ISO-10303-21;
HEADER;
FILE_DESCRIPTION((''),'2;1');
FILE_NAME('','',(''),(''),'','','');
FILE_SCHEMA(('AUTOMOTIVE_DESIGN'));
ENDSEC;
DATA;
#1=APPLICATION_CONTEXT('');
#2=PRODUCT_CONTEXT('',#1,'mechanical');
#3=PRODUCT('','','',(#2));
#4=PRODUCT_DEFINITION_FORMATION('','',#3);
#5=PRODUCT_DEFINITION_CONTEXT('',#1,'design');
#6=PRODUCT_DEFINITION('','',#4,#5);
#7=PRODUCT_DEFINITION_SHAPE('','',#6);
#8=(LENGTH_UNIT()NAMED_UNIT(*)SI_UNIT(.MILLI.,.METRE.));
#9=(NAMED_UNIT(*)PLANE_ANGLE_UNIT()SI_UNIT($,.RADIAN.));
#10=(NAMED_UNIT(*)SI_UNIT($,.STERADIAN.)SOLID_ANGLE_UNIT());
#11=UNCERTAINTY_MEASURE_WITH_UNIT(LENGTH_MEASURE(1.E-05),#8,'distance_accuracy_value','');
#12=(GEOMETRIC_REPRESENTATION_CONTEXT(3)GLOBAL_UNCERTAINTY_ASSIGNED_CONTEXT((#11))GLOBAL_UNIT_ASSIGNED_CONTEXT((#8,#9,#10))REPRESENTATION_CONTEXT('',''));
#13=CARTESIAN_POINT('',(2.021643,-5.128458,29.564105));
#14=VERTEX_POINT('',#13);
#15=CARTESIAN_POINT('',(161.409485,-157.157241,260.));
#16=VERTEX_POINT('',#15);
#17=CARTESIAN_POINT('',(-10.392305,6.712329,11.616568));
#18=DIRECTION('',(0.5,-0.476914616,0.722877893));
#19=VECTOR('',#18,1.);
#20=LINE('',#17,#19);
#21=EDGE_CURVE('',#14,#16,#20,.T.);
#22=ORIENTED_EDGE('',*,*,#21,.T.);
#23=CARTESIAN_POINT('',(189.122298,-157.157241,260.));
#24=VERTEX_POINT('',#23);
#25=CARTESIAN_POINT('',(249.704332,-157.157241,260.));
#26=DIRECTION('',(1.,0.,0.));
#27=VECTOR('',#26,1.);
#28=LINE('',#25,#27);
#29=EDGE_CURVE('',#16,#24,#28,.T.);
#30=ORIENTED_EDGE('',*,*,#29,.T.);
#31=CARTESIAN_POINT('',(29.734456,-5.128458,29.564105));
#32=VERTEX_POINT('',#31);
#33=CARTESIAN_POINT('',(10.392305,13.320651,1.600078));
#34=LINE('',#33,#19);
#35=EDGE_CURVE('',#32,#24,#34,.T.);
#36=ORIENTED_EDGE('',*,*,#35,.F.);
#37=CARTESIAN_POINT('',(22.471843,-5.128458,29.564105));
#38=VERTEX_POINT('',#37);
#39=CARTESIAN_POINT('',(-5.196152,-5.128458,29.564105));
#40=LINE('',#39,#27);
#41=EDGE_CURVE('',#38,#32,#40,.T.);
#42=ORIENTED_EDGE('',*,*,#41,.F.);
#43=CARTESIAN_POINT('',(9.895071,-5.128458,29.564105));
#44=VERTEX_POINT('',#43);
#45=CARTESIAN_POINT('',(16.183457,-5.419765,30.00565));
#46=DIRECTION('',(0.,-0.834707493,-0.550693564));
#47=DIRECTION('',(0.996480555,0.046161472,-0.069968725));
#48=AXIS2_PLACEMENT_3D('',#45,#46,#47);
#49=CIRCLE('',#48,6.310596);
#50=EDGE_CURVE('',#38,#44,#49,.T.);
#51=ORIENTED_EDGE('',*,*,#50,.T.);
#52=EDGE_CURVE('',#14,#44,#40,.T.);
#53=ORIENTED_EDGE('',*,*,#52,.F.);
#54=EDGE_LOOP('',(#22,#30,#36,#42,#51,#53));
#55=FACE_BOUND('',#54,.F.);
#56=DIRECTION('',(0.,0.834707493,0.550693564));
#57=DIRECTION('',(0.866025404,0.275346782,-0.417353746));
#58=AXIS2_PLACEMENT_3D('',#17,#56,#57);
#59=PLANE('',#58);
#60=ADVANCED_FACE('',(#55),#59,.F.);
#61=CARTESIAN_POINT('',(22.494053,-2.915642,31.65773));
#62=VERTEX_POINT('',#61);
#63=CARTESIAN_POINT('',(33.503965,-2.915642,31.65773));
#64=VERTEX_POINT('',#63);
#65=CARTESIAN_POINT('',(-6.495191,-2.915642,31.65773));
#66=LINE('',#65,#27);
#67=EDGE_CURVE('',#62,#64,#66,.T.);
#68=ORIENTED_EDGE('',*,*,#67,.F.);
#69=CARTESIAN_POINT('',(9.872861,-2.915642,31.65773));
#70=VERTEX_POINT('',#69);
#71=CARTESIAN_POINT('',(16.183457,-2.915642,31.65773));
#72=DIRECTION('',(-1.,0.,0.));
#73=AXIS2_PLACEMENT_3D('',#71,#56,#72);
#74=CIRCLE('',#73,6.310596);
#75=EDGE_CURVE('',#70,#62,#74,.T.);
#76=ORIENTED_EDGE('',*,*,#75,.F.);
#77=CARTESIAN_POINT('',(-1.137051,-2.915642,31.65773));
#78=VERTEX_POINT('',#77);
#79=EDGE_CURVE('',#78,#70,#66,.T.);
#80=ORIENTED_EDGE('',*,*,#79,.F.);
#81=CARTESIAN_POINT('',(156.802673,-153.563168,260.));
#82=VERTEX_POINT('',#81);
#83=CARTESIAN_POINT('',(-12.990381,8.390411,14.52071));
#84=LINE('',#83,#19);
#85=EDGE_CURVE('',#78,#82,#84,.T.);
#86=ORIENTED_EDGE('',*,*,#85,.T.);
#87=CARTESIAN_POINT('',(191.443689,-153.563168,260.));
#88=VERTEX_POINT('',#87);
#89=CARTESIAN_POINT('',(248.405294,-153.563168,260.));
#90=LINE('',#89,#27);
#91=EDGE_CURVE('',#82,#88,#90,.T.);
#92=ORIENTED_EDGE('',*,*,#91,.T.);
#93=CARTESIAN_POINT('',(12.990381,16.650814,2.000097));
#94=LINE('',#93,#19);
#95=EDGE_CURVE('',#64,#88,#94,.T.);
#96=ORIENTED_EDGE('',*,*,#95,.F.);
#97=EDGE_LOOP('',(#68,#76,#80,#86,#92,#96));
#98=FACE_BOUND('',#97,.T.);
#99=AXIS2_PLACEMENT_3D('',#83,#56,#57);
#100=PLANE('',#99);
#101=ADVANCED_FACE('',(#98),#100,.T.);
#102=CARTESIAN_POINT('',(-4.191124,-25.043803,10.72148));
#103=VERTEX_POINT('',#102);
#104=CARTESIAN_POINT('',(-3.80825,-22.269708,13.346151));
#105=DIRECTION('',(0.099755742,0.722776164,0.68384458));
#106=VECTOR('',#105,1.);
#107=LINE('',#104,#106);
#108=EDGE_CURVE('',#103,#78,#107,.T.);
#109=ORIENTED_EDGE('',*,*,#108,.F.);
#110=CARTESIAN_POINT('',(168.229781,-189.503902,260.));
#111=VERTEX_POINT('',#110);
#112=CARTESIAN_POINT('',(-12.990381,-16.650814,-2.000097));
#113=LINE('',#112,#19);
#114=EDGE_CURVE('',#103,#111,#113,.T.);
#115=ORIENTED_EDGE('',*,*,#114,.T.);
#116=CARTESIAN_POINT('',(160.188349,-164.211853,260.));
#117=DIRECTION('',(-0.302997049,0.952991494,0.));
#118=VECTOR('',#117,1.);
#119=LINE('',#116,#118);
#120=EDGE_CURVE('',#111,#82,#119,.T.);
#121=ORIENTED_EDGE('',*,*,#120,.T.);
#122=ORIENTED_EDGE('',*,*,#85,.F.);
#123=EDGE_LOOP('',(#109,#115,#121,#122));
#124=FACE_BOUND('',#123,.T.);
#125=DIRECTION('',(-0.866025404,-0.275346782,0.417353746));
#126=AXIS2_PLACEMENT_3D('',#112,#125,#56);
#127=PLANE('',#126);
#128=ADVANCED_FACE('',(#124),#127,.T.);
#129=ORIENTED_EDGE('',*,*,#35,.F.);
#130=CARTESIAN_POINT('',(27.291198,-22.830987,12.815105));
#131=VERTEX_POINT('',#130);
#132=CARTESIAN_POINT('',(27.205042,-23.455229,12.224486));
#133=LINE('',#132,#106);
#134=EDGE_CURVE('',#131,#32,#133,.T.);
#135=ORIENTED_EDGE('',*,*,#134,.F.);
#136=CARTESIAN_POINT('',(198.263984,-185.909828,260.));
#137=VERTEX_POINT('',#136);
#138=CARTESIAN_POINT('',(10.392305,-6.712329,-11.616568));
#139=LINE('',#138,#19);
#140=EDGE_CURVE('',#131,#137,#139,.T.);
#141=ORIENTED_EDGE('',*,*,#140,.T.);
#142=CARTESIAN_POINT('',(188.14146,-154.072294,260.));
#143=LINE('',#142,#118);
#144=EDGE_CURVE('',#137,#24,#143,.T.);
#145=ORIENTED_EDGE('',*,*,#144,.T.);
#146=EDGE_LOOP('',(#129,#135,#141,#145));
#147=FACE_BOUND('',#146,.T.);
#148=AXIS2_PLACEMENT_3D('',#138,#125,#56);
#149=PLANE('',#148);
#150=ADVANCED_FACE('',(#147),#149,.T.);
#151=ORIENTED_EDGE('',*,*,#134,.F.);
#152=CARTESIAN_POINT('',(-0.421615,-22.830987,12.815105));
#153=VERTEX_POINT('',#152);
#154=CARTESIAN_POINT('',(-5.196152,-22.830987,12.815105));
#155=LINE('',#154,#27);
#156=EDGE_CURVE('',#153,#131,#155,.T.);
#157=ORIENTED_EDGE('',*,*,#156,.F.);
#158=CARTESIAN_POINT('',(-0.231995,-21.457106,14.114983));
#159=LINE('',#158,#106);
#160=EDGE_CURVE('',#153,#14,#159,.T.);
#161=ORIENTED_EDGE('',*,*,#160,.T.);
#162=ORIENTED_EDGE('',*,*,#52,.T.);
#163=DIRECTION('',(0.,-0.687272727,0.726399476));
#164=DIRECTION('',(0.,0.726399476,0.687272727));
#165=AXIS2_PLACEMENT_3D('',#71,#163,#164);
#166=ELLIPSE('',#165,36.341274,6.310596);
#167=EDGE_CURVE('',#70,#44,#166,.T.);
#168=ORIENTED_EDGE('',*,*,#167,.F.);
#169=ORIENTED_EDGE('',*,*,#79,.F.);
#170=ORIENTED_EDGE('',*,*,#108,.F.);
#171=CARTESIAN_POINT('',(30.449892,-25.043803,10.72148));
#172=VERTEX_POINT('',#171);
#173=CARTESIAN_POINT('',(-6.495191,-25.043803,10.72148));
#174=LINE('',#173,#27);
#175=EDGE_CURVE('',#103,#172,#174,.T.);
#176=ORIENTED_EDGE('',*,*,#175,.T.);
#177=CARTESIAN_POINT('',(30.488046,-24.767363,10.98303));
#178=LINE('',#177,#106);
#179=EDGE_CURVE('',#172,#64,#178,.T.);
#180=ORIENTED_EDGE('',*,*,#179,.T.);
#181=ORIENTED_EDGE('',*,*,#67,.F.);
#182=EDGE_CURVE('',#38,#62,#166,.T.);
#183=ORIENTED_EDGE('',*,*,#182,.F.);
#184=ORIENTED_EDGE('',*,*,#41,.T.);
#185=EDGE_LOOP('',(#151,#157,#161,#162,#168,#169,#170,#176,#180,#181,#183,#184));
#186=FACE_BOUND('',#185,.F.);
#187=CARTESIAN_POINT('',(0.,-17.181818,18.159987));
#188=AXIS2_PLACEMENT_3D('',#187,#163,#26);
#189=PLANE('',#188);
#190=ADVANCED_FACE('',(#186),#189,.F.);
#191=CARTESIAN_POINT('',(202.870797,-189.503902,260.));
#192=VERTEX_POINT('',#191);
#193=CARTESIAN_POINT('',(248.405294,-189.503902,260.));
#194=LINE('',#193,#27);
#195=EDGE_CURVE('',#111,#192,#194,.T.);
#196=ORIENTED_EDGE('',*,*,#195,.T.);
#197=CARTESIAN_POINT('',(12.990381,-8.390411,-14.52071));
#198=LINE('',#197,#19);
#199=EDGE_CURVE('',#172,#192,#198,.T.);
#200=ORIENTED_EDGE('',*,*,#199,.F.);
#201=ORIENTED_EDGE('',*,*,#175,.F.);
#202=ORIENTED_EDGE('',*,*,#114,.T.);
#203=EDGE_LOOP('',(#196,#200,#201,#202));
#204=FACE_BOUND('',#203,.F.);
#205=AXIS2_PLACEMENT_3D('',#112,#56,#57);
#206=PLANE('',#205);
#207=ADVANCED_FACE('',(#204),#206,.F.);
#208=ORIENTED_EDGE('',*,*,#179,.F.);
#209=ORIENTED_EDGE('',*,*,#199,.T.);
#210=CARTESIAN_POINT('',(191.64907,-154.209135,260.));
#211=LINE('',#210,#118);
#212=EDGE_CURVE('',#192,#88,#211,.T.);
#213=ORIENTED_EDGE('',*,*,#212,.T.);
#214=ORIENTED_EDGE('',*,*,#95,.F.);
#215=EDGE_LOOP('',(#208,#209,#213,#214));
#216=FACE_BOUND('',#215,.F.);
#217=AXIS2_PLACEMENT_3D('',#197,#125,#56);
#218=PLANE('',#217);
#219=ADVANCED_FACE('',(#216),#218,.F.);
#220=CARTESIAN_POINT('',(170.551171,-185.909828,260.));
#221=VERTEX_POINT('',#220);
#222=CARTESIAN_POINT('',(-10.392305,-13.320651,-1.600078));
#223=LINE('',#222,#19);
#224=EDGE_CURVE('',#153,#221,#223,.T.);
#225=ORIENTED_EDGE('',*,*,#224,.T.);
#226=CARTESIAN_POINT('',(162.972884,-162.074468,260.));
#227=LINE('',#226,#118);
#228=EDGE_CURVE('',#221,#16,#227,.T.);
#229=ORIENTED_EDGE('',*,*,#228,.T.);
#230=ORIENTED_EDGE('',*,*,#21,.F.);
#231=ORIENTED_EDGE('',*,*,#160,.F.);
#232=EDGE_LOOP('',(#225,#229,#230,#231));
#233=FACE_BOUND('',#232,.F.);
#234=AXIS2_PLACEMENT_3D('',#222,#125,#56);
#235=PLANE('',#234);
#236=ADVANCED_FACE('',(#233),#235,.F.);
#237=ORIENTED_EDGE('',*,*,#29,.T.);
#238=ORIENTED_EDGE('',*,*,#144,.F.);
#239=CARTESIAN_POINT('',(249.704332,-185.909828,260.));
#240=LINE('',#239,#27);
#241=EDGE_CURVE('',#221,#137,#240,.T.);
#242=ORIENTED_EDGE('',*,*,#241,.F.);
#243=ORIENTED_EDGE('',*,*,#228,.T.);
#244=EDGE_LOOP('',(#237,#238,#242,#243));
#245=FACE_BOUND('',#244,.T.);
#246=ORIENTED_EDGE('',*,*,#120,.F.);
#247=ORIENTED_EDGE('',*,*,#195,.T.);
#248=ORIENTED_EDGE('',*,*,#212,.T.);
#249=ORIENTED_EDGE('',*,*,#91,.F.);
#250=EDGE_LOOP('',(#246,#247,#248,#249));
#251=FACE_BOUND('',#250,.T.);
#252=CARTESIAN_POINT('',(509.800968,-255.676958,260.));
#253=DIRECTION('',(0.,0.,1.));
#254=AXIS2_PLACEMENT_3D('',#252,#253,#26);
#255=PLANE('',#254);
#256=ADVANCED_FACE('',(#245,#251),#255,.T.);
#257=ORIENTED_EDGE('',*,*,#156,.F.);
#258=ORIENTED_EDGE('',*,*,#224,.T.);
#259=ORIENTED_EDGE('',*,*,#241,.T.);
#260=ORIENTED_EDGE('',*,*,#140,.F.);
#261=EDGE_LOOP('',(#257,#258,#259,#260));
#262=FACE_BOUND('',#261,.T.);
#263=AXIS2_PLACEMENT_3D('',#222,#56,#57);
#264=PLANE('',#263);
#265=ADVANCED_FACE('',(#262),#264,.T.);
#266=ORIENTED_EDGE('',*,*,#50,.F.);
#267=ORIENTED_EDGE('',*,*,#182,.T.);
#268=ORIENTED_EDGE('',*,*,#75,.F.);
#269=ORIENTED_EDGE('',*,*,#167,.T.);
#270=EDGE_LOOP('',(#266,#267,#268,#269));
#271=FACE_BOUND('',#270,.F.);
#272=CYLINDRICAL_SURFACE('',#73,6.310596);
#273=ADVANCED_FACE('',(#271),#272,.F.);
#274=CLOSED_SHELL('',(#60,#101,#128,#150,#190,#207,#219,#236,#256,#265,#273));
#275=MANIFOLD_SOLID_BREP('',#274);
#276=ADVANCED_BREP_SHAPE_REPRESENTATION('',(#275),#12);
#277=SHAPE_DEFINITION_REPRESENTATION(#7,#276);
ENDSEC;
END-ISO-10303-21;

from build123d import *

# Parameters (mm, degrees)
F4_W      = 30
F4_H      = 30
F4_W_2    = 24
F4_H_2    = 24
F5_DEPTH  = 1000
F7_W      = 1359.9022671681
F7_H      = 1462.2605508027
F8_DEPTH  = 477.3996029769
F11_W     = 260.7968747616
F11_H     = 228.6183834076
F12_DEPTH = 46.9924863148
F13_R     = 6.3105959623
F14_DEPTH = 3


with BuildPart() as f5:
    # F4 (on face) → F5 (new body)
    with BuildSketch(Plane(origin=(0, 0, 0), x_dir=(0.8660254038, 0.2753467822, -0.4173537463), z_dir=(0.5, -0.4769146164, 0.7228778933))):
        Rectangle(F4_W, F4_H)
        Rectangle(F4_W_2, F4_H_2, mode=Mode.SUBTRACT)
    extrude(amount=F5_DEPTH)

    # F7 (on offset) → F8 (cut, through all)
    with BuildSketch(Plane.XY.offset(260)):
        with Locations((509.8009683141, -255.676958236)):
            Rectangle(F7_W, F7_H)
    extrude(amount=F8_DEPTH, mode=Mode.SUBTRACT)

    # F11 (on face) → F12 (cut, through all)
    with BuildSketch(Plane(origin=(0, -17.1818181667, 18.1599869076), x_dir=(1, 0, 0), z_dir=(0, -0.6872727267, 0.7263994763))):
        Rectangle(F11_W, F11_H)
    extrude(amount=-F12_DEPTH, mode=Mode.SUBTRACT)

    # F13 (on face) → F14 (cut, through all)
    with BuildSketch(Plane(origin=(0, 12.5206123889, 8.2604034651), x_dir=(-1, 0, 0), z_dir=(0, 0.8347074926, 0.5506935643))):
        with Locations((-16.1834571395, 28.0305700078)):
            Circle(F13_R)
    extrude(amount=-F14_DEPTH, mode=Mode.SUBTRACT)


solid = f5.part
